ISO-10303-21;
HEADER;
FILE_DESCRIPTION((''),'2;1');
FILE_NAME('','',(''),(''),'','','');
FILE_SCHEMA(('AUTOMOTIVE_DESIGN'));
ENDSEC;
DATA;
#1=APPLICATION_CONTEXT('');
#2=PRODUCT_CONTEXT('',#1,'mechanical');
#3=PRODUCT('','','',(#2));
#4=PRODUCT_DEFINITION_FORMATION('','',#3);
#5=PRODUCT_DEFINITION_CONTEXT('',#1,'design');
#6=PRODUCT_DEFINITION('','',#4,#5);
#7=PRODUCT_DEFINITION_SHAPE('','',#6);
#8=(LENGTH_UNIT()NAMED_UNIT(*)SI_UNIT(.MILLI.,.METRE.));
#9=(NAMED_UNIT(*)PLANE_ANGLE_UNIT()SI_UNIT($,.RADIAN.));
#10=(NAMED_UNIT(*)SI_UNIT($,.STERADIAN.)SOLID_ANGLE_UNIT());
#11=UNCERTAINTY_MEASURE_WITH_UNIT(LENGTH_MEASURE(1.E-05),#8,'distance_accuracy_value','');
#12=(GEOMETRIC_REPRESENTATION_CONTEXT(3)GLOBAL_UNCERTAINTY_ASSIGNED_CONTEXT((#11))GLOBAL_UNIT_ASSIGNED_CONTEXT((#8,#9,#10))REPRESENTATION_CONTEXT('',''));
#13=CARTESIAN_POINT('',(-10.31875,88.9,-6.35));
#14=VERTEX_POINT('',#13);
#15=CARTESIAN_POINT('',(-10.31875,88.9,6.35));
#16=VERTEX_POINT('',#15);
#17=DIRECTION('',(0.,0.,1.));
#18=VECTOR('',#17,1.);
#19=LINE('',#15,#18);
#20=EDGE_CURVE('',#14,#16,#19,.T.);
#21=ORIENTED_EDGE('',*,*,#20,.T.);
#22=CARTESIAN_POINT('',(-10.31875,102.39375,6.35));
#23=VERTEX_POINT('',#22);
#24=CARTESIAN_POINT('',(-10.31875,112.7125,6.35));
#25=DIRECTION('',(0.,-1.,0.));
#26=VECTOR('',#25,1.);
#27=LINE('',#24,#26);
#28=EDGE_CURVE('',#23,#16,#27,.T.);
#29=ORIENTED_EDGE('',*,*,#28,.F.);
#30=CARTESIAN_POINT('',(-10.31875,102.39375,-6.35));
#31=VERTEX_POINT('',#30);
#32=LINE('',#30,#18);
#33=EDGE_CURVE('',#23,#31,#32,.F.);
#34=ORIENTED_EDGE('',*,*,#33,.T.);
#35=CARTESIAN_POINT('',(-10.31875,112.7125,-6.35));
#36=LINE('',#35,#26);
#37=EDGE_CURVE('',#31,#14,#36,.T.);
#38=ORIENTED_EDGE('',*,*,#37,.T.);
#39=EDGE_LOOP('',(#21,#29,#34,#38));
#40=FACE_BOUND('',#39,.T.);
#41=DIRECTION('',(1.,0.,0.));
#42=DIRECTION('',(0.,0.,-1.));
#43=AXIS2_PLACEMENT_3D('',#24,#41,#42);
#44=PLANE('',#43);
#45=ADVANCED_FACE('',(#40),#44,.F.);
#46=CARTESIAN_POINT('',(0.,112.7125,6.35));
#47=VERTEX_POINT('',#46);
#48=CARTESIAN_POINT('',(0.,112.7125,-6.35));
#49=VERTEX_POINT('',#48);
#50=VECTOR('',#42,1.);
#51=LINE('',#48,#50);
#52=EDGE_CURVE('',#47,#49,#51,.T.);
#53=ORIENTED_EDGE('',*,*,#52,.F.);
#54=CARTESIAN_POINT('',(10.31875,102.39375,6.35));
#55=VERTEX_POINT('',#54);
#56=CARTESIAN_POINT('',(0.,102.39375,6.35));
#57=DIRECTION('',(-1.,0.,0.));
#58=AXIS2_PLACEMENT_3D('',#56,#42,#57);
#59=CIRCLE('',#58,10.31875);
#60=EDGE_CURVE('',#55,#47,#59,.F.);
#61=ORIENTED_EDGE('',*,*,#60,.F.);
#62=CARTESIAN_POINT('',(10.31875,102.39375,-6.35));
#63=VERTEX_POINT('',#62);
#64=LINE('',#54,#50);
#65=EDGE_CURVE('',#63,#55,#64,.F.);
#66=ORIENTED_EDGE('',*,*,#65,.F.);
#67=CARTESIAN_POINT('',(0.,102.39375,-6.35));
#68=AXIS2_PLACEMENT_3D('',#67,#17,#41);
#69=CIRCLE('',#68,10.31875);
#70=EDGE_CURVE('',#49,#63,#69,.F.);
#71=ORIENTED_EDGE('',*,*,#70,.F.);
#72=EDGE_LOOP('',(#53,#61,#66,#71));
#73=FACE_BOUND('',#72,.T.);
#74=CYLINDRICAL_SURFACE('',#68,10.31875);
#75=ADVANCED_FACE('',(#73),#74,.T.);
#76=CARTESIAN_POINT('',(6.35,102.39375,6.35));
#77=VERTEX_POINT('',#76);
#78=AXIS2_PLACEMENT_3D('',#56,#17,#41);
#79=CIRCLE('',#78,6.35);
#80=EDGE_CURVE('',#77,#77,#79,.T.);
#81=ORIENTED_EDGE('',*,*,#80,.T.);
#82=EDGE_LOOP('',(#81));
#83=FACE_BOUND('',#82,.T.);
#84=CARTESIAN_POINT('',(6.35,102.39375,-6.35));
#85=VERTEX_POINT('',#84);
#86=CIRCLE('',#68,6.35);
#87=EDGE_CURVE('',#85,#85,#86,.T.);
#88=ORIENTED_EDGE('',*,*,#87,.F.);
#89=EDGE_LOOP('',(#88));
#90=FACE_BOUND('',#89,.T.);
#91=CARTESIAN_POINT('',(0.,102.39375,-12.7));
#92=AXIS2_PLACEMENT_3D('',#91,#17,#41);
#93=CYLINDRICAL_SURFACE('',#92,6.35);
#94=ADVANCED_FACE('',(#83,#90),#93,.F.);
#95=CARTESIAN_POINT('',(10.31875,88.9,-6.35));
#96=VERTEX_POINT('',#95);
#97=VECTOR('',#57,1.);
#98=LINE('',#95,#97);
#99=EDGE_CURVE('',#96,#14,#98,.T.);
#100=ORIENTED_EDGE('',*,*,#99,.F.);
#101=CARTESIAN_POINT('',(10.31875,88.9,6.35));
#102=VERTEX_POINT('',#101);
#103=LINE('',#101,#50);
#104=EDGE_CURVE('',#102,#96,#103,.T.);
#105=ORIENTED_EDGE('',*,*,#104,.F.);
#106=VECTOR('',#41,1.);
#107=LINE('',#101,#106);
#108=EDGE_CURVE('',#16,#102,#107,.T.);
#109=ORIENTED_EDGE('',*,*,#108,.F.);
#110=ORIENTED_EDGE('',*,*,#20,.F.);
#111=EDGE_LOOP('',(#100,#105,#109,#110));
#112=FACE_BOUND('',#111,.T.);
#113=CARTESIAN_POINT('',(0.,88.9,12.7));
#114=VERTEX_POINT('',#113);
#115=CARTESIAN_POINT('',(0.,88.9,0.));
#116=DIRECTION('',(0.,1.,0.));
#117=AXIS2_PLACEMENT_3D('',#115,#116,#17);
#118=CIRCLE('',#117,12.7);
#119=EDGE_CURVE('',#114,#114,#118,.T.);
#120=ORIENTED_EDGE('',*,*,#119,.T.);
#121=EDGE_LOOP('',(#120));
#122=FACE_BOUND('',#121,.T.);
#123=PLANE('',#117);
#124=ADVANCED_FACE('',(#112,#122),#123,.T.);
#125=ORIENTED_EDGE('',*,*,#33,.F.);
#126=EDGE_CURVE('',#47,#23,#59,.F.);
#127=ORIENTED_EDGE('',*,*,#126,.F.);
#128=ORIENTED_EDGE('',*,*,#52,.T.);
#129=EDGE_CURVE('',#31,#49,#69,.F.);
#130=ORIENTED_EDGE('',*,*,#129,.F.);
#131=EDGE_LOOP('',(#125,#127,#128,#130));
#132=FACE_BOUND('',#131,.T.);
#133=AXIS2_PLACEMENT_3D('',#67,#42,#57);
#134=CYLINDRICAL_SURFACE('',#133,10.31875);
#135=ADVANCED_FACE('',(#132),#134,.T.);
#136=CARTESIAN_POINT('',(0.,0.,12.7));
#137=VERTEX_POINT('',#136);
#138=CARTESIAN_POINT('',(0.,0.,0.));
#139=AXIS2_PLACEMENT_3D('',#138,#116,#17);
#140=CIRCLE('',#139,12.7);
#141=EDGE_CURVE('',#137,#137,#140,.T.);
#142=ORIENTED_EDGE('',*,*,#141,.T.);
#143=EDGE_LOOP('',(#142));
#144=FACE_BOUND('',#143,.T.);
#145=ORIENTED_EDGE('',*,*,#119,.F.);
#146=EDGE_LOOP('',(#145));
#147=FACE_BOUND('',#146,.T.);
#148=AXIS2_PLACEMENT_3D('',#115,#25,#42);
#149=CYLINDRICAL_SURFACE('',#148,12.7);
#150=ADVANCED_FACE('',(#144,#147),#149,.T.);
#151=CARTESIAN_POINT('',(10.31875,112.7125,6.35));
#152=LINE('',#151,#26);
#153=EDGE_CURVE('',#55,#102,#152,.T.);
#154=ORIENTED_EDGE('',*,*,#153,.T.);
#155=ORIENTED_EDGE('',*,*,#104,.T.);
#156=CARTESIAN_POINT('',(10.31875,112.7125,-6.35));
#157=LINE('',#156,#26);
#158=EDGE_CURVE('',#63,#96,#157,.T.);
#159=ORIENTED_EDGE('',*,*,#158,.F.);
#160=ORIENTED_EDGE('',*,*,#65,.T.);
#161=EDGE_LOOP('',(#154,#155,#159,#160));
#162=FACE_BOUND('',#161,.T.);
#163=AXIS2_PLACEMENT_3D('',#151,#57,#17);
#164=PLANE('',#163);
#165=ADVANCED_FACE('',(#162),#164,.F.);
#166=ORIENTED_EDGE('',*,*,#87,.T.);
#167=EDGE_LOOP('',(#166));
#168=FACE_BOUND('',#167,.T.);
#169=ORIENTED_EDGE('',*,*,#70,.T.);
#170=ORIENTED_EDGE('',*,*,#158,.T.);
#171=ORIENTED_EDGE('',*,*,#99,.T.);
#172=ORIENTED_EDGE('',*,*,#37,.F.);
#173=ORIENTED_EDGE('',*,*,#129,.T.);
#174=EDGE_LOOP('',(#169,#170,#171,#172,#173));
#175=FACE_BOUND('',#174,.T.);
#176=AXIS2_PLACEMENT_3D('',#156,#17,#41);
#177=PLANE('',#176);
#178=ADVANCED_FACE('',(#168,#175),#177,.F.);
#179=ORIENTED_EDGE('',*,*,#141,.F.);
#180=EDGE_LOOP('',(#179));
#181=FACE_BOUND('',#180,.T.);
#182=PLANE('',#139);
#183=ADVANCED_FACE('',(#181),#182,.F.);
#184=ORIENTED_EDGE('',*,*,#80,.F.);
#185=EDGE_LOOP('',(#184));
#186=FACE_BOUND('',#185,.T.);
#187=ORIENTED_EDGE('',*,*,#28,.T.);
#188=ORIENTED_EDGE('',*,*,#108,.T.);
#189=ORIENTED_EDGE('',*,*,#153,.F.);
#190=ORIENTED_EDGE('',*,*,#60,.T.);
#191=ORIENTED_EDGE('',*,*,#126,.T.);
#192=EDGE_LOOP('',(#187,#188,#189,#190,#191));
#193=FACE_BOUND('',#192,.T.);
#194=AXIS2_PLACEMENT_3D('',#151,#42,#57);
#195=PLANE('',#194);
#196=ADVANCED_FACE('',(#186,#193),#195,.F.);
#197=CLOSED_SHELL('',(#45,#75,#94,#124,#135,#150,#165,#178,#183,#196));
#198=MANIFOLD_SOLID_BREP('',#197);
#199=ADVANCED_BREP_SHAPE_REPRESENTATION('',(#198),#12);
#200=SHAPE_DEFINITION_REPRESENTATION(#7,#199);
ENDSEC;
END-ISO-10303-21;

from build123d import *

# Parameters (mm, degrees)
SKETCH1_R          = 12.7
EXTRUDE1_DEPTH     = 88.9
SKETCH2_W          = 20.6375
SKETCH2_H          = 12.7
EXTRUDE2_DEPTH     = 23.8125
FILLET1_R          = 10.31875
SKETCH3_R          = 6.35
CUT_EXTRUDE1_DEPTH = 116.01434761


with BuildPart() as part:
    # Sketch1 → Extrude1 (new body)
    with BuildSketch(Plane(origin=(0, 0, 0), x_dir=(1, 0, 0), z_dir=(0, 1, 0))):
        with Locations(Location((0, 0, 0), (0, 0, 270))):
            Circle(SKETCH1_R)
    extrude(amount=EXTRUDE1_DEPTH)

    # Sketch2 → Extrude2 (add)
    with BuildSketch(Plane(origin=(0, 88.9, 0), x_dir=(-1, 0, 0), z_dir=(0, 1, 0))):
        Rectangle(SKETCH2_W, SKETCH2_H)
    extrude(amount=EXTRUDE2_DEPTH)

    # Fillet1
    fillet1_edges = [part.edges().sort_by_distance(p)[0] for p in [
        (-10.31875, 112.7125, 0),
        (10.31875, 112.7125, 0),
    ]]
    fillet(fillet1_edges, radius=FILLET1_R - 0.0001)  # a hair under: the kernel refuses the full size

    # Sketch3 → Cut-Extrude1 (cut, through all)
    with BuildSketch(Plane.XY.offset(6.35)):
        with Locations((0, 102.39375)):
            Circle(SKETCH3_R)
    extrude(amount=-CUT_EXTRUDE1_DEPTH, mode=Mode.SUBTRACT)


solid = part.part
